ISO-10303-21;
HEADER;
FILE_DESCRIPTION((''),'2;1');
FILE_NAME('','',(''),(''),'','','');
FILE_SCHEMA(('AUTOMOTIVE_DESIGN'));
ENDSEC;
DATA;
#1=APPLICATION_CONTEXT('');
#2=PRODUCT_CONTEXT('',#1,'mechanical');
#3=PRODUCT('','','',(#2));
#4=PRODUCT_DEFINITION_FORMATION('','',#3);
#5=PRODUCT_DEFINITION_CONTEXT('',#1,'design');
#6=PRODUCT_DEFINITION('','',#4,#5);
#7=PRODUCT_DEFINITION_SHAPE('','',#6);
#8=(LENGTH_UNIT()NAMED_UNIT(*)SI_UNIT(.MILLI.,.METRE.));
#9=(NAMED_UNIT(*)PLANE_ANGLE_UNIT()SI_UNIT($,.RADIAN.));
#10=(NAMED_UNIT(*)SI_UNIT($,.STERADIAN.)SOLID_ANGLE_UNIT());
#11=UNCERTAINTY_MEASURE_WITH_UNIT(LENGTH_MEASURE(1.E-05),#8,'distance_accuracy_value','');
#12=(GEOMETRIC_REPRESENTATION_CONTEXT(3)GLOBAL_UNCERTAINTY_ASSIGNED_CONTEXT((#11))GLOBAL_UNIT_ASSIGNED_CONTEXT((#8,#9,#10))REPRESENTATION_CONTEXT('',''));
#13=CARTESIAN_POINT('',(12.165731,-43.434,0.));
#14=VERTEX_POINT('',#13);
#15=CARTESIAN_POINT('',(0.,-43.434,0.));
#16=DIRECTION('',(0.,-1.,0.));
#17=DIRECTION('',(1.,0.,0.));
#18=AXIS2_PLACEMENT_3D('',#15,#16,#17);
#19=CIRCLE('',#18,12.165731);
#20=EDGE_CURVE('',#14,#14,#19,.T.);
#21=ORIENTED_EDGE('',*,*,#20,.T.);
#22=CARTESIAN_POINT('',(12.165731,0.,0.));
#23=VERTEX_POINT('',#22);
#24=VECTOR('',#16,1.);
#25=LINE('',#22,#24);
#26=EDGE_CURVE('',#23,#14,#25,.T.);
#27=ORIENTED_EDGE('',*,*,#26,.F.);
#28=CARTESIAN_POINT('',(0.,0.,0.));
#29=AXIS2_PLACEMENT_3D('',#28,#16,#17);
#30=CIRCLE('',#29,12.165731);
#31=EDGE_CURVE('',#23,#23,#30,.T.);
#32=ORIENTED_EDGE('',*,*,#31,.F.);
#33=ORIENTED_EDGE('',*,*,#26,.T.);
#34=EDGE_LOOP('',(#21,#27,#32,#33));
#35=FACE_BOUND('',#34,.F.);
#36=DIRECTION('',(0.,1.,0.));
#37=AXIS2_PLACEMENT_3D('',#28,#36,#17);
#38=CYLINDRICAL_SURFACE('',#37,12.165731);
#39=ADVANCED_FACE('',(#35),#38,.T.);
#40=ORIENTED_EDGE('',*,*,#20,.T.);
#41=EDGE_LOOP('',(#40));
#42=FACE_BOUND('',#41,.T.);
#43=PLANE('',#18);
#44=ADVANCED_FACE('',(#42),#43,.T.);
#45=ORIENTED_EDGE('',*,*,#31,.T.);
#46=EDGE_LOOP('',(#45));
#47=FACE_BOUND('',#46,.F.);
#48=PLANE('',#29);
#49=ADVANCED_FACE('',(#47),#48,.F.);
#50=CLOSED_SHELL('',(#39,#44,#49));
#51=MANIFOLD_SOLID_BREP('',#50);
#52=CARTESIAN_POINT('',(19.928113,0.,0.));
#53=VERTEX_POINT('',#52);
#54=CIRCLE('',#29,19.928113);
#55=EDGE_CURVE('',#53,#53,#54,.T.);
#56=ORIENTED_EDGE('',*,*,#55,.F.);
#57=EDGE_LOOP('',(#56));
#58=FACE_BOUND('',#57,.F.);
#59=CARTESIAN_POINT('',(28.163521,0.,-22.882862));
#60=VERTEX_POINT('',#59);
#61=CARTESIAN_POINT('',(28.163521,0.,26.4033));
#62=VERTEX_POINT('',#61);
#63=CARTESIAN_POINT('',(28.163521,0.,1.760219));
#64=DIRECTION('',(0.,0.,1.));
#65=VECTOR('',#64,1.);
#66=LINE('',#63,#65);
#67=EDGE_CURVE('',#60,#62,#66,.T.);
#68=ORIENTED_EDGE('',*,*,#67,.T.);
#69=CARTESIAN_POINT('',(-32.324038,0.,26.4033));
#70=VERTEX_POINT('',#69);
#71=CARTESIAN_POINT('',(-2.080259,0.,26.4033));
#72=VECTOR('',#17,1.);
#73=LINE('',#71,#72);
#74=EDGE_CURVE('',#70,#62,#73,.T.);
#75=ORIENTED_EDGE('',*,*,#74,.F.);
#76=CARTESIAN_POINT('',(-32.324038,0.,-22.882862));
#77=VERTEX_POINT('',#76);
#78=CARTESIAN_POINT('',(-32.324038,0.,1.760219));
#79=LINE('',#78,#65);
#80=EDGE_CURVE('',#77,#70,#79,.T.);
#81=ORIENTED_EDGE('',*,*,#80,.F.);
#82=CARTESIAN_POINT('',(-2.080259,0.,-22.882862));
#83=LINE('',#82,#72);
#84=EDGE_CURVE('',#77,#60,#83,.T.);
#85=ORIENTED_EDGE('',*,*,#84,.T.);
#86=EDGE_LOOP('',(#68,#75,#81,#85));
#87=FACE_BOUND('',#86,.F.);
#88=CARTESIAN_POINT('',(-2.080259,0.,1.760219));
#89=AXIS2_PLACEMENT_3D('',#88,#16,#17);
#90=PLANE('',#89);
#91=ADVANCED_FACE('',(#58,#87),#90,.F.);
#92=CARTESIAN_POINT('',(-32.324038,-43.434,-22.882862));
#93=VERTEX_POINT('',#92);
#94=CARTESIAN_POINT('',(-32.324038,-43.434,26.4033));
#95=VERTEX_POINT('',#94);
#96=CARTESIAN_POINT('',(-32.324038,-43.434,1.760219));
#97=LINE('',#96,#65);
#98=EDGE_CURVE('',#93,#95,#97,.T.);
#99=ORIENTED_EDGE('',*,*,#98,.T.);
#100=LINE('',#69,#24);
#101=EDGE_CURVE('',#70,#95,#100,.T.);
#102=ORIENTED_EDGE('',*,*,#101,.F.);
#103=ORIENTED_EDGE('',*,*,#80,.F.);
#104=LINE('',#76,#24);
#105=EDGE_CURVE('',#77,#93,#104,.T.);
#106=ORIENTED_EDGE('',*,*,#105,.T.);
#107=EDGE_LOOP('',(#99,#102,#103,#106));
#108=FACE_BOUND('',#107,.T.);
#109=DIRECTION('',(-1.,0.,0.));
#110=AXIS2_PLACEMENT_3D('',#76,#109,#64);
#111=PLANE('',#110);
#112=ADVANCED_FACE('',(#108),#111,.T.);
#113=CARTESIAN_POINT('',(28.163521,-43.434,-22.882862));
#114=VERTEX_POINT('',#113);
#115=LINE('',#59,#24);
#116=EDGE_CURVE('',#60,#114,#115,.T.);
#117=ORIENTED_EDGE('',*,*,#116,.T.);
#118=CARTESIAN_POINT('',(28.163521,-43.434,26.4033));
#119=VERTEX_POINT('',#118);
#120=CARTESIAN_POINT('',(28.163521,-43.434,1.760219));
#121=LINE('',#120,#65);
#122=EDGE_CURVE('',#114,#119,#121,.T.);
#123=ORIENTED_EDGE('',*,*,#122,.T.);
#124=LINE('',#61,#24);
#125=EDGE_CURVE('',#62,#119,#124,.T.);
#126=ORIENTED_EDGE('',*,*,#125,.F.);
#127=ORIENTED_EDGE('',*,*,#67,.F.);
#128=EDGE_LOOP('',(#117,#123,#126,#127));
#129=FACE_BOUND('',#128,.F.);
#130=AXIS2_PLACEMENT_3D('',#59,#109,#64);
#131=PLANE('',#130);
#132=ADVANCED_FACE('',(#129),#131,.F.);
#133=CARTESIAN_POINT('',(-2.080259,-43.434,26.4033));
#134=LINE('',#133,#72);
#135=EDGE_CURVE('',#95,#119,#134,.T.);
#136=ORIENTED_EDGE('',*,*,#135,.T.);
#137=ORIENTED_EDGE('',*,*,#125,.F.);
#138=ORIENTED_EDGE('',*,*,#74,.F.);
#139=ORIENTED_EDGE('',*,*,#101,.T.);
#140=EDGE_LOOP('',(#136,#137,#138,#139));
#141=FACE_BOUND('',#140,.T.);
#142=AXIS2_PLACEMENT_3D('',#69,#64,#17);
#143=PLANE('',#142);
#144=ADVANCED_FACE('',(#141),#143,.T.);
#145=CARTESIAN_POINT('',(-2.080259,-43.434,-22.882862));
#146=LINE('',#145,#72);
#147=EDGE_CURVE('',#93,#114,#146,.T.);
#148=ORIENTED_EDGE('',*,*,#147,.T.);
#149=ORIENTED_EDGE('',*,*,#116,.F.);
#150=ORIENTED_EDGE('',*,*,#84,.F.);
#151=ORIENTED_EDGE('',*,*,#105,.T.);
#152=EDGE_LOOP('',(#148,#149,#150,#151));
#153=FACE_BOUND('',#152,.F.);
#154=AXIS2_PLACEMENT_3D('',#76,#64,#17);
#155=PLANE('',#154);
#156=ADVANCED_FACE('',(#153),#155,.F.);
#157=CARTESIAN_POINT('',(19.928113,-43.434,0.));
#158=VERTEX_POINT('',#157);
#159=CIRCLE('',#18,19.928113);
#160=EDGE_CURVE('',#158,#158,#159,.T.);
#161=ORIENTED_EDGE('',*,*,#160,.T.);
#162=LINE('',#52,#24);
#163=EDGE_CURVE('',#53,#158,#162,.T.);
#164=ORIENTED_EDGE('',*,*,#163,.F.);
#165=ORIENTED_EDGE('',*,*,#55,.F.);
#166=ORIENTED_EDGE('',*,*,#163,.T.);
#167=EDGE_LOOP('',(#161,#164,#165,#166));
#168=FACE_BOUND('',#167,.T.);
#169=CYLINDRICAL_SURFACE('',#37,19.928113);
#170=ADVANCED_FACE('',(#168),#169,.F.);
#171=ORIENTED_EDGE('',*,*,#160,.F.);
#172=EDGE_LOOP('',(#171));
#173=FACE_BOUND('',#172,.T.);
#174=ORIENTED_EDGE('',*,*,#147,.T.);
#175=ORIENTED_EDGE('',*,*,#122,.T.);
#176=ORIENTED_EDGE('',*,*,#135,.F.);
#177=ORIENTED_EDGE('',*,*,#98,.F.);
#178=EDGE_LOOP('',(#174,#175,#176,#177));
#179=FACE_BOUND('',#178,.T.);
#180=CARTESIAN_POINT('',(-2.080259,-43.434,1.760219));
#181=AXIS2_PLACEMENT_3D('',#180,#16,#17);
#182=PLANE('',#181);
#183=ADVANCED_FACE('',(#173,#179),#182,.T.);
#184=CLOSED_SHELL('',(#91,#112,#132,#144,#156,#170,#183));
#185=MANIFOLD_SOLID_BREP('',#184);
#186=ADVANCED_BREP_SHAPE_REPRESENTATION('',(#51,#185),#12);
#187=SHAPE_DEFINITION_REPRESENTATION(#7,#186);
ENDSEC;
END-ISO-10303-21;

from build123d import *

# Parameters (mm, degrees)
F0_W     = 60.4875590652
F0_H     = 49.2861624807
F0_R     = 19.9281126129
F1_DEPTH = 43.434
F0_R_2   = 12.1657306008


# Not quite as in the source:
# - the program builds the solid bodies; features that only make, move or delete a surface that nothing else refers to are left out


with BuildPart() as f1:
    # F0 (on Front) → F1 (new body)
    with BuildSketch(Plane.XZ):
        with Locations((-2.0802589133, 1.7602192238)):
            Rectangle(F0_W, F0_H)
        Circle(F0_R, mode=Mode.SUBTRACT)
    extrude(amount=F1_DEPTH)


with BuildPart() as f1b:
    # F0 (on Front) → F1, piece 2 (new body)
    with BuildSketch(Plane.XZ):
        Circle(F0_R_2)
    extrude(amount=F1_DEPTH)


solid = Compound([f1.part, f1b.part])
